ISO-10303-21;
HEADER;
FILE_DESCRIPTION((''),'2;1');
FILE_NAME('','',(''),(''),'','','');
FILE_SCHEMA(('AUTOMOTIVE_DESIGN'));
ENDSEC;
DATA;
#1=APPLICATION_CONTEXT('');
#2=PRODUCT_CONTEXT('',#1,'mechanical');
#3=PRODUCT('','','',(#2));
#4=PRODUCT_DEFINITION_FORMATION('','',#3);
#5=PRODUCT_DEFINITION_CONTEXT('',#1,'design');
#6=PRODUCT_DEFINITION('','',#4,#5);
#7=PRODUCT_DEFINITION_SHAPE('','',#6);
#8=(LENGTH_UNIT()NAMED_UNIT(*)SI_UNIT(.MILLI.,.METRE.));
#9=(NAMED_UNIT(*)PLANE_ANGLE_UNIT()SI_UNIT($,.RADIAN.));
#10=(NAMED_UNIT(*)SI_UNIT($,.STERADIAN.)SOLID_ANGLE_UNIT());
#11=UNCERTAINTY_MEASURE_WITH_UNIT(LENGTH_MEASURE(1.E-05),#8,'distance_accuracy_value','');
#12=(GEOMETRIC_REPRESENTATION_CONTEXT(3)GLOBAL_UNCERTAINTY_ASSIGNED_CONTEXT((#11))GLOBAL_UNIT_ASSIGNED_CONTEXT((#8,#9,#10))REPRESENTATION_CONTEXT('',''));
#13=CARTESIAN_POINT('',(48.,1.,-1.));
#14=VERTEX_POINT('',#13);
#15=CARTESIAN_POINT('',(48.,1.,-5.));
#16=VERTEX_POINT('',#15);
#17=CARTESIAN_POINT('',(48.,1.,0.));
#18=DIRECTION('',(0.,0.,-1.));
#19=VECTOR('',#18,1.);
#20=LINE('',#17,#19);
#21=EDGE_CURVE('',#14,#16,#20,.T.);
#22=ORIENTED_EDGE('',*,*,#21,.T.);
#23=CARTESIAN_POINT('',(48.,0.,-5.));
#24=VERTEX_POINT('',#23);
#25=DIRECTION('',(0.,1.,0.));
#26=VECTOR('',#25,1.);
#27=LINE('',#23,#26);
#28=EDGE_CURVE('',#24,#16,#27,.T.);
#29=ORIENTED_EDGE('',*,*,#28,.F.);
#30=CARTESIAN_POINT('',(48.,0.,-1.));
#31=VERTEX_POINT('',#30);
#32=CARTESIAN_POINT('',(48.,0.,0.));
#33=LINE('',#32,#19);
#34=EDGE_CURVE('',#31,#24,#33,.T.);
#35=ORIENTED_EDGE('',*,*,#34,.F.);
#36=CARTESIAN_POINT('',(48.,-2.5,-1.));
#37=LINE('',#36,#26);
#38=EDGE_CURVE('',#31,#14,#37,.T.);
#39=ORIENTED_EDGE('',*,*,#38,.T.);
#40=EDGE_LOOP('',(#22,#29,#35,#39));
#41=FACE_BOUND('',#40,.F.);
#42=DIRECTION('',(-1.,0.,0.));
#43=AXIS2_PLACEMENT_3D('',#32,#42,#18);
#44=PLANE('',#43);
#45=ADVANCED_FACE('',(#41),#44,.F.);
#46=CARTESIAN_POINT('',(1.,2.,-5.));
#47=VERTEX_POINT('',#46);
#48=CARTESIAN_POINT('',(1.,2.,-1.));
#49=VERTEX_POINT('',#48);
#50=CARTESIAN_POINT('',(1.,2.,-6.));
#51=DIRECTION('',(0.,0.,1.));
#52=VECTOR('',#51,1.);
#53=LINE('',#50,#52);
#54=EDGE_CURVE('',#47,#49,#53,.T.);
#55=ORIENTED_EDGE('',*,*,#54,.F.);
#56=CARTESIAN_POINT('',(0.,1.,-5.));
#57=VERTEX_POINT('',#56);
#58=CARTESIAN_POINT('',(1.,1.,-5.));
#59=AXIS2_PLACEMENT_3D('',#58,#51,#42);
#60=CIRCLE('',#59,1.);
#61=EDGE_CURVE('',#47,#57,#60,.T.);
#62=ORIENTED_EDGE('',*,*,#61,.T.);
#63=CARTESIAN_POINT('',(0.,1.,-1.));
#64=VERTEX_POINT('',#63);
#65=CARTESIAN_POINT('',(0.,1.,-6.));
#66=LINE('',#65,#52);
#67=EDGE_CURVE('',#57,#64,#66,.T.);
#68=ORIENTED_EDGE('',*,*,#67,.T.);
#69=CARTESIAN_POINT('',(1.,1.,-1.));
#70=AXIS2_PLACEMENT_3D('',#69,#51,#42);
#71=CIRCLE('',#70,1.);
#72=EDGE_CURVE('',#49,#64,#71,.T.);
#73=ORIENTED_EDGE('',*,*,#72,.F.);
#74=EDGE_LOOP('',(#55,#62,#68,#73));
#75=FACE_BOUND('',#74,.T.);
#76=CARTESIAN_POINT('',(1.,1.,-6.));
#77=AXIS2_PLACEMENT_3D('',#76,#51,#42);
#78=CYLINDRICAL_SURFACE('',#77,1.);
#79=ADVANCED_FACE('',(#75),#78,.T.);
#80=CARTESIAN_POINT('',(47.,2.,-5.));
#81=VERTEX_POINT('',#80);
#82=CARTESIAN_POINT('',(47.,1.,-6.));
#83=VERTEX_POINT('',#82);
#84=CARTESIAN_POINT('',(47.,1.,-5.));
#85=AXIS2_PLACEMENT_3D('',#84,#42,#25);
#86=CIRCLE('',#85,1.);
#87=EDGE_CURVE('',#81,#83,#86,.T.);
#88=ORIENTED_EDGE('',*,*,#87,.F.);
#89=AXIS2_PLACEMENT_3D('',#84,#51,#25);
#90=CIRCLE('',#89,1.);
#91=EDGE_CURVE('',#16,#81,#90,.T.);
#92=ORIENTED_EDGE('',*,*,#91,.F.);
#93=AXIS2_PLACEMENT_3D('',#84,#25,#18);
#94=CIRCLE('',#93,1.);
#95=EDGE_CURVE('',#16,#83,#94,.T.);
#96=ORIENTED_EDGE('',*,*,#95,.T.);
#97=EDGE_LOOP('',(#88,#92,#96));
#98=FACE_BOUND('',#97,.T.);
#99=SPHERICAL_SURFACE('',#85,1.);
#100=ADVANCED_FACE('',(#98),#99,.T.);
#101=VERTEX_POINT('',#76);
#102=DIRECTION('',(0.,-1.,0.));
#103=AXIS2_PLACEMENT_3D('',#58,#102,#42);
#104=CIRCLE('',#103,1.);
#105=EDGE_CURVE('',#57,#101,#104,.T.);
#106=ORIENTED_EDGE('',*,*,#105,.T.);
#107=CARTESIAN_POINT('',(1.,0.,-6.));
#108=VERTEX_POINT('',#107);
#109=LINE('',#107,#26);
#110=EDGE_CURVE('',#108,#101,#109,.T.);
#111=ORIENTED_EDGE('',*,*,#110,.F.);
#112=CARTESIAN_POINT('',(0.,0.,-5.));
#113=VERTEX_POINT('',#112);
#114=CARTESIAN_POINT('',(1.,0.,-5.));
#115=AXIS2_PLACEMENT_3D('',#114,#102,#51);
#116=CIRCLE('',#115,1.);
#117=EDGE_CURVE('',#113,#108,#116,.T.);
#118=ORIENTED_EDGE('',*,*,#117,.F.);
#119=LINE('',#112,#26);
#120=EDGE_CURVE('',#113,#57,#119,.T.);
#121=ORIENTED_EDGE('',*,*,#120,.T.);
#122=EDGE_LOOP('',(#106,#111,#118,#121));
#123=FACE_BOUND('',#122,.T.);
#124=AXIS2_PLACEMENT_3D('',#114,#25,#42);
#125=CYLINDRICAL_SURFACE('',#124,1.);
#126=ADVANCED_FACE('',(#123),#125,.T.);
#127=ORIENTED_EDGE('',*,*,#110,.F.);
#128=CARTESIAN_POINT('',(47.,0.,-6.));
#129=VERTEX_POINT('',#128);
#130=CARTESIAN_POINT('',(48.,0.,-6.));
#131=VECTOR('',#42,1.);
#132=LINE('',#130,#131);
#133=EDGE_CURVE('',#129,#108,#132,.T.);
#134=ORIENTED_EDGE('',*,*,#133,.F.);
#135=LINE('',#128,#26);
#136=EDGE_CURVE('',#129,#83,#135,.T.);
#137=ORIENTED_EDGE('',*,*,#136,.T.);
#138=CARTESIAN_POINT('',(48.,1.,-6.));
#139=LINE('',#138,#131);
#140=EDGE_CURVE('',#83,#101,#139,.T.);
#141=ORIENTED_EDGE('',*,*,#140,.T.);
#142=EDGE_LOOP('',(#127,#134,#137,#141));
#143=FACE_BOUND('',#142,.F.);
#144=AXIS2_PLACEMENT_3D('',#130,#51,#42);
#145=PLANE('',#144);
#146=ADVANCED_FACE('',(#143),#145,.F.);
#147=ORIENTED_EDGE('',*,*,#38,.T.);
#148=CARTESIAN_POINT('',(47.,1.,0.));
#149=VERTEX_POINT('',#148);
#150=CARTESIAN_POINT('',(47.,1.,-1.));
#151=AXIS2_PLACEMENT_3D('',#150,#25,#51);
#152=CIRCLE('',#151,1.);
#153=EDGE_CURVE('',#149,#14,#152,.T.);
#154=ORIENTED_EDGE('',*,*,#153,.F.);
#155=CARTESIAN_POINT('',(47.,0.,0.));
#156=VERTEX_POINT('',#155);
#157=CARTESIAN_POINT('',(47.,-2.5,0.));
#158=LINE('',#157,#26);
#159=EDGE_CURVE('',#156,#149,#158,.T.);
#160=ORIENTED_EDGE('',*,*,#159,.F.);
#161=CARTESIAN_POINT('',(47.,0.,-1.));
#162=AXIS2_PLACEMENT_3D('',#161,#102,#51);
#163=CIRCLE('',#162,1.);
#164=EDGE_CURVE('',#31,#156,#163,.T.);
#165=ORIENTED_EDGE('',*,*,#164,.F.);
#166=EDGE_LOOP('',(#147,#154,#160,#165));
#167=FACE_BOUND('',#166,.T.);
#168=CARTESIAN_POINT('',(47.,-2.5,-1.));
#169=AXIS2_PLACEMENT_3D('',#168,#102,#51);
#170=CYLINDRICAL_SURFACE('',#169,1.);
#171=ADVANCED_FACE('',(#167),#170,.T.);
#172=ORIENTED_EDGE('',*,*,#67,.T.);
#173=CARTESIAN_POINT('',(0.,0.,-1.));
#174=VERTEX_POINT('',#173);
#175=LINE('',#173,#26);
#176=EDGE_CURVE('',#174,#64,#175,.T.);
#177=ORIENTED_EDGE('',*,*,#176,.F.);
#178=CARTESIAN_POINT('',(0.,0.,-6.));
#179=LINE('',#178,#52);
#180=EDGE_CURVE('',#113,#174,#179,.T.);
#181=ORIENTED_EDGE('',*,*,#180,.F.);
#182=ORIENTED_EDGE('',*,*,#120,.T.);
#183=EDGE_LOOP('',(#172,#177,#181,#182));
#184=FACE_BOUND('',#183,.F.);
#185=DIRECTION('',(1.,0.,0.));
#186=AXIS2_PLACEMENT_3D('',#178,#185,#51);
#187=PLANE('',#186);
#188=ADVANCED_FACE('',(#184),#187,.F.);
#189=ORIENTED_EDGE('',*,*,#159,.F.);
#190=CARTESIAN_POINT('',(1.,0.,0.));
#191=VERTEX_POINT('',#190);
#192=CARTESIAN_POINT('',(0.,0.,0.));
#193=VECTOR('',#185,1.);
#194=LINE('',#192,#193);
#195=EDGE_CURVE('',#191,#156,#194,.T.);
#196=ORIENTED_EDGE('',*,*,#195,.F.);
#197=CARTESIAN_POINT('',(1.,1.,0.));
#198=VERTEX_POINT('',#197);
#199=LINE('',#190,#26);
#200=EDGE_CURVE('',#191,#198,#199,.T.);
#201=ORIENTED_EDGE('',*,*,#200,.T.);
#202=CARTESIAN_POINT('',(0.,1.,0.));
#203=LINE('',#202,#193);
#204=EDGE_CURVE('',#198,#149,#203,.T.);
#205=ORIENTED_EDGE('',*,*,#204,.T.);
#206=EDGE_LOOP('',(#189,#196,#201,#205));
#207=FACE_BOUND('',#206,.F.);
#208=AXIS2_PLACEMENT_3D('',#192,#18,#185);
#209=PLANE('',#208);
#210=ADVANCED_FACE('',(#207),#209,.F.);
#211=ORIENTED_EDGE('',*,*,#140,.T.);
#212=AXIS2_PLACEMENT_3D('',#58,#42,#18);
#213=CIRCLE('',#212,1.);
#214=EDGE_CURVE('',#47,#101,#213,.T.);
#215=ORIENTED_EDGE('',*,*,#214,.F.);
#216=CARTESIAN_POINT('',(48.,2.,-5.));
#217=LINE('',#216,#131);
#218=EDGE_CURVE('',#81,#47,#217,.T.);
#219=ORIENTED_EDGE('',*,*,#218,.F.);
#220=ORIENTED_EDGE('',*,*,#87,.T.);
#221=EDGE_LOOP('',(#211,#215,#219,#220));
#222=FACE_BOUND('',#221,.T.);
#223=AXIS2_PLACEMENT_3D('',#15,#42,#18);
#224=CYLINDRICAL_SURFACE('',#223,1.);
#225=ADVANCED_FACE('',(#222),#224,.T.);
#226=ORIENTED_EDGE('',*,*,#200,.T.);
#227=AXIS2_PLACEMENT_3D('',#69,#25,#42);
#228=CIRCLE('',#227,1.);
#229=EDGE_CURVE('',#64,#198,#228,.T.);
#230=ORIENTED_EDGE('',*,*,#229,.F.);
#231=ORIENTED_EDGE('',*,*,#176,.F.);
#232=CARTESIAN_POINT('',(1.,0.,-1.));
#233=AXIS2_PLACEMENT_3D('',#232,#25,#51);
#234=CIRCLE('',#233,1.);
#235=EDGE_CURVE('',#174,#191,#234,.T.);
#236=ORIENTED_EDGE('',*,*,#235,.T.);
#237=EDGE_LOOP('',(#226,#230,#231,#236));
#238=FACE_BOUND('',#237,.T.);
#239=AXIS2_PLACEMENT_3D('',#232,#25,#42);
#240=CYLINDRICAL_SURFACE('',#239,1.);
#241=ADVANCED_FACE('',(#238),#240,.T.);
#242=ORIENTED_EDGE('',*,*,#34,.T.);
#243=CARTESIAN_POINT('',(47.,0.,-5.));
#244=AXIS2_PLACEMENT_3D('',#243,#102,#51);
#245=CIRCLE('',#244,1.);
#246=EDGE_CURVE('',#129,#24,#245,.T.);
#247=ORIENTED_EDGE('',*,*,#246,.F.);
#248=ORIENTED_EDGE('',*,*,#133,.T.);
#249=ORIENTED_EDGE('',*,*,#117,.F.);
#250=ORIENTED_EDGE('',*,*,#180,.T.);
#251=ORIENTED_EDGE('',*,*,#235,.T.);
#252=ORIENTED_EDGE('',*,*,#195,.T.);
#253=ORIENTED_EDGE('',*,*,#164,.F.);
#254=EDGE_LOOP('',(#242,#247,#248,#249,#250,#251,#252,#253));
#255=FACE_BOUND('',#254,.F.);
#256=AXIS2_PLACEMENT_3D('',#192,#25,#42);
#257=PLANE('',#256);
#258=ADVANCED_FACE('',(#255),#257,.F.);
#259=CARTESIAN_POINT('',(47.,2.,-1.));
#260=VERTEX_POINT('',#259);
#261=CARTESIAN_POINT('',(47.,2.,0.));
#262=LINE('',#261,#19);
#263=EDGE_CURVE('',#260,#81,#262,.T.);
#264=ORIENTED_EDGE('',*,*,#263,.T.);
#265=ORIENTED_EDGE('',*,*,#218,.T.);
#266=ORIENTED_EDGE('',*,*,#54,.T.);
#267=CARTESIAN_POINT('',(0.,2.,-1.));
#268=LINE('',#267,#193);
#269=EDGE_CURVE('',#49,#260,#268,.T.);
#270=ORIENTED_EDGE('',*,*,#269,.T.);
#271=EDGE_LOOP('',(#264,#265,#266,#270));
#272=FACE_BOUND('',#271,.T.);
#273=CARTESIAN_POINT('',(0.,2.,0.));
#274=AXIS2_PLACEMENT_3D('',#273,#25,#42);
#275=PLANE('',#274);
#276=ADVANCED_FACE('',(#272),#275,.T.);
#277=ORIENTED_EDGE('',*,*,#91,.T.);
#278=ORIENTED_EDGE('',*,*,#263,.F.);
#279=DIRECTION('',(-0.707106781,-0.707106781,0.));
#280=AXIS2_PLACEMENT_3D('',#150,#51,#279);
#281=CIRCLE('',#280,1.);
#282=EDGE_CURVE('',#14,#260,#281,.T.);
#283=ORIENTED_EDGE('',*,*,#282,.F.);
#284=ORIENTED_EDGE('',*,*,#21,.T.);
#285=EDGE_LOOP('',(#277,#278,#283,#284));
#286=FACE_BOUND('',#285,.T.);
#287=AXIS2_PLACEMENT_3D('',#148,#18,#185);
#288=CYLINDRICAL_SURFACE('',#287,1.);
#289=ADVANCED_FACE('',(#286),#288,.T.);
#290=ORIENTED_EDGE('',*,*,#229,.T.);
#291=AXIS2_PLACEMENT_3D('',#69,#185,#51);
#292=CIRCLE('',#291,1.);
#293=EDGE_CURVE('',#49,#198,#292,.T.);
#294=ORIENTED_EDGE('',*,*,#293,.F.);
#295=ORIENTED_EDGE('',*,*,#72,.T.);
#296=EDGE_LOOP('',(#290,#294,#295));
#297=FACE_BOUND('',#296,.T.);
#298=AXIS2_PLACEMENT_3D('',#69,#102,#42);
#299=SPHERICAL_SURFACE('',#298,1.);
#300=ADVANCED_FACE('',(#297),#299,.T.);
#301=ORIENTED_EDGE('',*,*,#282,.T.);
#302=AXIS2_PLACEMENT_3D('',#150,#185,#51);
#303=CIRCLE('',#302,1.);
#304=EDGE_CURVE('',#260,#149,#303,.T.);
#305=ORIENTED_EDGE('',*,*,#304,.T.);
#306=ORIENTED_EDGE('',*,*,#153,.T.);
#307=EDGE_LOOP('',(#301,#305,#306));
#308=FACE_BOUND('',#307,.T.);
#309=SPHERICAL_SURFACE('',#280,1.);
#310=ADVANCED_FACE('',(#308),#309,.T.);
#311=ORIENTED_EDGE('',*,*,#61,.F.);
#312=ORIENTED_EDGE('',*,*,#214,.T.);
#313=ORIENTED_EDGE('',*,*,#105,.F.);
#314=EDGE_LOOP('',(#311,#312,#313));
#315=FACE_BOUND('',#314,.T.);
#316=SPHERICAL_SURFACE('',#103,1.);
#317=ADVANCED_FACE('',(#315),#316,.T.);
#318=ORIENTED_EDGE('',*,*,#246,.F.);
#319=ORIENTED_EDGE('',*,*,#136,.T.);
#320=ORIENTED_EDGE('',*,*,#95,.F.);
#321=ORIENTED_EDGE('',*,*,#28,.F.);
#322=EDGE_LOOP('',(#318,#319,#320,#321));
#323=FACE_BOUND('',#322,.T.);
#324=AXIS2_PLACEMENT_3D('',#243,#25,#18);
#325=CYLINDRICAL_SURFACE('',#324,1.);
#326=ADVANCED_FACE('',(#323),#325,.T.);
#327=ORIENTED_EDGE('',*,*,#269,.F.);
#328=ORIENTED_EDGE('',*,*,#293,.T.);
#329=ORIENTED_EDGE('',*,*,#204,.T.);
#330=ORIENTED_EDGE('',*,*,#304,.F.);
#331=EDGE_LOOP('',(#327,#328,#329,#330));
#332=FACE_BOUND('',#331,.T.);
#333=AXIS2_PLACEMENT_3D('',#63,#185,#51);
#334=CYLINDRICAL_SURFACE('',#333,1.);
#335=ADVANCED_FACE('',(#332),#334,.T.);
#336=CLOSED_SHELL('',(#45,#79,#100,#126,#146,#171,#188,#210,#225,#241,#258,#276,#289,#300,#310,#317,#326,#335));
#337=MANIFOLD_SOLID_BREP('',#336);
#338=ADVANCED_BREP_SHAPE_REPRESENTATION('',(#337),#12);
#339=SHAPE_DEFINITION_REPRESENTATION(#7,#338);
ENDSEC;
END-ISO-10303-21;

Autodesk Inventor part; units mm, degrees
ref_plane "YZ Plane" through (0, 0, 0) normal (1, 0, 0) x (0, 1, 0)
ref_plane "XZ Plane" through (0, 0, 0) normal (0, 1, 0) x (-1, 0, 0)
ref_plane "XY Plane" through (0, 0, 0) normal (0, 0, 1) x (1, 0, 0)
sketch "스케치1" plane through (0, 0, 0) normal (0, 1, 0) x (-1, 0, 0)
  line L0 (0, 0) -> (-48, 0)
  line L1 (-48, 0) -> (-48, -6)
  line L2 (-48, -6) -> (0, -6)
  line L3 (0, -6) -> (0, 0)
  dimension "d0" = 48
  dimension "d1" = 6
extrude "돌출1" add sketch "스케치1" along normal blind 2
fillet "모깎기1" radius 1 7 edges at (0, 1, -6) (0, 1, 0) (0, 2, -3) (24, 2, -6) (48, 2, -3) (24, 2, 0) (48, 1, -6)
fillet "모깎기2" radius 1 2 edges at (47.7071, 1.7071, -0.2929) (48, 0.5, 0)
properties part number "gojung"
